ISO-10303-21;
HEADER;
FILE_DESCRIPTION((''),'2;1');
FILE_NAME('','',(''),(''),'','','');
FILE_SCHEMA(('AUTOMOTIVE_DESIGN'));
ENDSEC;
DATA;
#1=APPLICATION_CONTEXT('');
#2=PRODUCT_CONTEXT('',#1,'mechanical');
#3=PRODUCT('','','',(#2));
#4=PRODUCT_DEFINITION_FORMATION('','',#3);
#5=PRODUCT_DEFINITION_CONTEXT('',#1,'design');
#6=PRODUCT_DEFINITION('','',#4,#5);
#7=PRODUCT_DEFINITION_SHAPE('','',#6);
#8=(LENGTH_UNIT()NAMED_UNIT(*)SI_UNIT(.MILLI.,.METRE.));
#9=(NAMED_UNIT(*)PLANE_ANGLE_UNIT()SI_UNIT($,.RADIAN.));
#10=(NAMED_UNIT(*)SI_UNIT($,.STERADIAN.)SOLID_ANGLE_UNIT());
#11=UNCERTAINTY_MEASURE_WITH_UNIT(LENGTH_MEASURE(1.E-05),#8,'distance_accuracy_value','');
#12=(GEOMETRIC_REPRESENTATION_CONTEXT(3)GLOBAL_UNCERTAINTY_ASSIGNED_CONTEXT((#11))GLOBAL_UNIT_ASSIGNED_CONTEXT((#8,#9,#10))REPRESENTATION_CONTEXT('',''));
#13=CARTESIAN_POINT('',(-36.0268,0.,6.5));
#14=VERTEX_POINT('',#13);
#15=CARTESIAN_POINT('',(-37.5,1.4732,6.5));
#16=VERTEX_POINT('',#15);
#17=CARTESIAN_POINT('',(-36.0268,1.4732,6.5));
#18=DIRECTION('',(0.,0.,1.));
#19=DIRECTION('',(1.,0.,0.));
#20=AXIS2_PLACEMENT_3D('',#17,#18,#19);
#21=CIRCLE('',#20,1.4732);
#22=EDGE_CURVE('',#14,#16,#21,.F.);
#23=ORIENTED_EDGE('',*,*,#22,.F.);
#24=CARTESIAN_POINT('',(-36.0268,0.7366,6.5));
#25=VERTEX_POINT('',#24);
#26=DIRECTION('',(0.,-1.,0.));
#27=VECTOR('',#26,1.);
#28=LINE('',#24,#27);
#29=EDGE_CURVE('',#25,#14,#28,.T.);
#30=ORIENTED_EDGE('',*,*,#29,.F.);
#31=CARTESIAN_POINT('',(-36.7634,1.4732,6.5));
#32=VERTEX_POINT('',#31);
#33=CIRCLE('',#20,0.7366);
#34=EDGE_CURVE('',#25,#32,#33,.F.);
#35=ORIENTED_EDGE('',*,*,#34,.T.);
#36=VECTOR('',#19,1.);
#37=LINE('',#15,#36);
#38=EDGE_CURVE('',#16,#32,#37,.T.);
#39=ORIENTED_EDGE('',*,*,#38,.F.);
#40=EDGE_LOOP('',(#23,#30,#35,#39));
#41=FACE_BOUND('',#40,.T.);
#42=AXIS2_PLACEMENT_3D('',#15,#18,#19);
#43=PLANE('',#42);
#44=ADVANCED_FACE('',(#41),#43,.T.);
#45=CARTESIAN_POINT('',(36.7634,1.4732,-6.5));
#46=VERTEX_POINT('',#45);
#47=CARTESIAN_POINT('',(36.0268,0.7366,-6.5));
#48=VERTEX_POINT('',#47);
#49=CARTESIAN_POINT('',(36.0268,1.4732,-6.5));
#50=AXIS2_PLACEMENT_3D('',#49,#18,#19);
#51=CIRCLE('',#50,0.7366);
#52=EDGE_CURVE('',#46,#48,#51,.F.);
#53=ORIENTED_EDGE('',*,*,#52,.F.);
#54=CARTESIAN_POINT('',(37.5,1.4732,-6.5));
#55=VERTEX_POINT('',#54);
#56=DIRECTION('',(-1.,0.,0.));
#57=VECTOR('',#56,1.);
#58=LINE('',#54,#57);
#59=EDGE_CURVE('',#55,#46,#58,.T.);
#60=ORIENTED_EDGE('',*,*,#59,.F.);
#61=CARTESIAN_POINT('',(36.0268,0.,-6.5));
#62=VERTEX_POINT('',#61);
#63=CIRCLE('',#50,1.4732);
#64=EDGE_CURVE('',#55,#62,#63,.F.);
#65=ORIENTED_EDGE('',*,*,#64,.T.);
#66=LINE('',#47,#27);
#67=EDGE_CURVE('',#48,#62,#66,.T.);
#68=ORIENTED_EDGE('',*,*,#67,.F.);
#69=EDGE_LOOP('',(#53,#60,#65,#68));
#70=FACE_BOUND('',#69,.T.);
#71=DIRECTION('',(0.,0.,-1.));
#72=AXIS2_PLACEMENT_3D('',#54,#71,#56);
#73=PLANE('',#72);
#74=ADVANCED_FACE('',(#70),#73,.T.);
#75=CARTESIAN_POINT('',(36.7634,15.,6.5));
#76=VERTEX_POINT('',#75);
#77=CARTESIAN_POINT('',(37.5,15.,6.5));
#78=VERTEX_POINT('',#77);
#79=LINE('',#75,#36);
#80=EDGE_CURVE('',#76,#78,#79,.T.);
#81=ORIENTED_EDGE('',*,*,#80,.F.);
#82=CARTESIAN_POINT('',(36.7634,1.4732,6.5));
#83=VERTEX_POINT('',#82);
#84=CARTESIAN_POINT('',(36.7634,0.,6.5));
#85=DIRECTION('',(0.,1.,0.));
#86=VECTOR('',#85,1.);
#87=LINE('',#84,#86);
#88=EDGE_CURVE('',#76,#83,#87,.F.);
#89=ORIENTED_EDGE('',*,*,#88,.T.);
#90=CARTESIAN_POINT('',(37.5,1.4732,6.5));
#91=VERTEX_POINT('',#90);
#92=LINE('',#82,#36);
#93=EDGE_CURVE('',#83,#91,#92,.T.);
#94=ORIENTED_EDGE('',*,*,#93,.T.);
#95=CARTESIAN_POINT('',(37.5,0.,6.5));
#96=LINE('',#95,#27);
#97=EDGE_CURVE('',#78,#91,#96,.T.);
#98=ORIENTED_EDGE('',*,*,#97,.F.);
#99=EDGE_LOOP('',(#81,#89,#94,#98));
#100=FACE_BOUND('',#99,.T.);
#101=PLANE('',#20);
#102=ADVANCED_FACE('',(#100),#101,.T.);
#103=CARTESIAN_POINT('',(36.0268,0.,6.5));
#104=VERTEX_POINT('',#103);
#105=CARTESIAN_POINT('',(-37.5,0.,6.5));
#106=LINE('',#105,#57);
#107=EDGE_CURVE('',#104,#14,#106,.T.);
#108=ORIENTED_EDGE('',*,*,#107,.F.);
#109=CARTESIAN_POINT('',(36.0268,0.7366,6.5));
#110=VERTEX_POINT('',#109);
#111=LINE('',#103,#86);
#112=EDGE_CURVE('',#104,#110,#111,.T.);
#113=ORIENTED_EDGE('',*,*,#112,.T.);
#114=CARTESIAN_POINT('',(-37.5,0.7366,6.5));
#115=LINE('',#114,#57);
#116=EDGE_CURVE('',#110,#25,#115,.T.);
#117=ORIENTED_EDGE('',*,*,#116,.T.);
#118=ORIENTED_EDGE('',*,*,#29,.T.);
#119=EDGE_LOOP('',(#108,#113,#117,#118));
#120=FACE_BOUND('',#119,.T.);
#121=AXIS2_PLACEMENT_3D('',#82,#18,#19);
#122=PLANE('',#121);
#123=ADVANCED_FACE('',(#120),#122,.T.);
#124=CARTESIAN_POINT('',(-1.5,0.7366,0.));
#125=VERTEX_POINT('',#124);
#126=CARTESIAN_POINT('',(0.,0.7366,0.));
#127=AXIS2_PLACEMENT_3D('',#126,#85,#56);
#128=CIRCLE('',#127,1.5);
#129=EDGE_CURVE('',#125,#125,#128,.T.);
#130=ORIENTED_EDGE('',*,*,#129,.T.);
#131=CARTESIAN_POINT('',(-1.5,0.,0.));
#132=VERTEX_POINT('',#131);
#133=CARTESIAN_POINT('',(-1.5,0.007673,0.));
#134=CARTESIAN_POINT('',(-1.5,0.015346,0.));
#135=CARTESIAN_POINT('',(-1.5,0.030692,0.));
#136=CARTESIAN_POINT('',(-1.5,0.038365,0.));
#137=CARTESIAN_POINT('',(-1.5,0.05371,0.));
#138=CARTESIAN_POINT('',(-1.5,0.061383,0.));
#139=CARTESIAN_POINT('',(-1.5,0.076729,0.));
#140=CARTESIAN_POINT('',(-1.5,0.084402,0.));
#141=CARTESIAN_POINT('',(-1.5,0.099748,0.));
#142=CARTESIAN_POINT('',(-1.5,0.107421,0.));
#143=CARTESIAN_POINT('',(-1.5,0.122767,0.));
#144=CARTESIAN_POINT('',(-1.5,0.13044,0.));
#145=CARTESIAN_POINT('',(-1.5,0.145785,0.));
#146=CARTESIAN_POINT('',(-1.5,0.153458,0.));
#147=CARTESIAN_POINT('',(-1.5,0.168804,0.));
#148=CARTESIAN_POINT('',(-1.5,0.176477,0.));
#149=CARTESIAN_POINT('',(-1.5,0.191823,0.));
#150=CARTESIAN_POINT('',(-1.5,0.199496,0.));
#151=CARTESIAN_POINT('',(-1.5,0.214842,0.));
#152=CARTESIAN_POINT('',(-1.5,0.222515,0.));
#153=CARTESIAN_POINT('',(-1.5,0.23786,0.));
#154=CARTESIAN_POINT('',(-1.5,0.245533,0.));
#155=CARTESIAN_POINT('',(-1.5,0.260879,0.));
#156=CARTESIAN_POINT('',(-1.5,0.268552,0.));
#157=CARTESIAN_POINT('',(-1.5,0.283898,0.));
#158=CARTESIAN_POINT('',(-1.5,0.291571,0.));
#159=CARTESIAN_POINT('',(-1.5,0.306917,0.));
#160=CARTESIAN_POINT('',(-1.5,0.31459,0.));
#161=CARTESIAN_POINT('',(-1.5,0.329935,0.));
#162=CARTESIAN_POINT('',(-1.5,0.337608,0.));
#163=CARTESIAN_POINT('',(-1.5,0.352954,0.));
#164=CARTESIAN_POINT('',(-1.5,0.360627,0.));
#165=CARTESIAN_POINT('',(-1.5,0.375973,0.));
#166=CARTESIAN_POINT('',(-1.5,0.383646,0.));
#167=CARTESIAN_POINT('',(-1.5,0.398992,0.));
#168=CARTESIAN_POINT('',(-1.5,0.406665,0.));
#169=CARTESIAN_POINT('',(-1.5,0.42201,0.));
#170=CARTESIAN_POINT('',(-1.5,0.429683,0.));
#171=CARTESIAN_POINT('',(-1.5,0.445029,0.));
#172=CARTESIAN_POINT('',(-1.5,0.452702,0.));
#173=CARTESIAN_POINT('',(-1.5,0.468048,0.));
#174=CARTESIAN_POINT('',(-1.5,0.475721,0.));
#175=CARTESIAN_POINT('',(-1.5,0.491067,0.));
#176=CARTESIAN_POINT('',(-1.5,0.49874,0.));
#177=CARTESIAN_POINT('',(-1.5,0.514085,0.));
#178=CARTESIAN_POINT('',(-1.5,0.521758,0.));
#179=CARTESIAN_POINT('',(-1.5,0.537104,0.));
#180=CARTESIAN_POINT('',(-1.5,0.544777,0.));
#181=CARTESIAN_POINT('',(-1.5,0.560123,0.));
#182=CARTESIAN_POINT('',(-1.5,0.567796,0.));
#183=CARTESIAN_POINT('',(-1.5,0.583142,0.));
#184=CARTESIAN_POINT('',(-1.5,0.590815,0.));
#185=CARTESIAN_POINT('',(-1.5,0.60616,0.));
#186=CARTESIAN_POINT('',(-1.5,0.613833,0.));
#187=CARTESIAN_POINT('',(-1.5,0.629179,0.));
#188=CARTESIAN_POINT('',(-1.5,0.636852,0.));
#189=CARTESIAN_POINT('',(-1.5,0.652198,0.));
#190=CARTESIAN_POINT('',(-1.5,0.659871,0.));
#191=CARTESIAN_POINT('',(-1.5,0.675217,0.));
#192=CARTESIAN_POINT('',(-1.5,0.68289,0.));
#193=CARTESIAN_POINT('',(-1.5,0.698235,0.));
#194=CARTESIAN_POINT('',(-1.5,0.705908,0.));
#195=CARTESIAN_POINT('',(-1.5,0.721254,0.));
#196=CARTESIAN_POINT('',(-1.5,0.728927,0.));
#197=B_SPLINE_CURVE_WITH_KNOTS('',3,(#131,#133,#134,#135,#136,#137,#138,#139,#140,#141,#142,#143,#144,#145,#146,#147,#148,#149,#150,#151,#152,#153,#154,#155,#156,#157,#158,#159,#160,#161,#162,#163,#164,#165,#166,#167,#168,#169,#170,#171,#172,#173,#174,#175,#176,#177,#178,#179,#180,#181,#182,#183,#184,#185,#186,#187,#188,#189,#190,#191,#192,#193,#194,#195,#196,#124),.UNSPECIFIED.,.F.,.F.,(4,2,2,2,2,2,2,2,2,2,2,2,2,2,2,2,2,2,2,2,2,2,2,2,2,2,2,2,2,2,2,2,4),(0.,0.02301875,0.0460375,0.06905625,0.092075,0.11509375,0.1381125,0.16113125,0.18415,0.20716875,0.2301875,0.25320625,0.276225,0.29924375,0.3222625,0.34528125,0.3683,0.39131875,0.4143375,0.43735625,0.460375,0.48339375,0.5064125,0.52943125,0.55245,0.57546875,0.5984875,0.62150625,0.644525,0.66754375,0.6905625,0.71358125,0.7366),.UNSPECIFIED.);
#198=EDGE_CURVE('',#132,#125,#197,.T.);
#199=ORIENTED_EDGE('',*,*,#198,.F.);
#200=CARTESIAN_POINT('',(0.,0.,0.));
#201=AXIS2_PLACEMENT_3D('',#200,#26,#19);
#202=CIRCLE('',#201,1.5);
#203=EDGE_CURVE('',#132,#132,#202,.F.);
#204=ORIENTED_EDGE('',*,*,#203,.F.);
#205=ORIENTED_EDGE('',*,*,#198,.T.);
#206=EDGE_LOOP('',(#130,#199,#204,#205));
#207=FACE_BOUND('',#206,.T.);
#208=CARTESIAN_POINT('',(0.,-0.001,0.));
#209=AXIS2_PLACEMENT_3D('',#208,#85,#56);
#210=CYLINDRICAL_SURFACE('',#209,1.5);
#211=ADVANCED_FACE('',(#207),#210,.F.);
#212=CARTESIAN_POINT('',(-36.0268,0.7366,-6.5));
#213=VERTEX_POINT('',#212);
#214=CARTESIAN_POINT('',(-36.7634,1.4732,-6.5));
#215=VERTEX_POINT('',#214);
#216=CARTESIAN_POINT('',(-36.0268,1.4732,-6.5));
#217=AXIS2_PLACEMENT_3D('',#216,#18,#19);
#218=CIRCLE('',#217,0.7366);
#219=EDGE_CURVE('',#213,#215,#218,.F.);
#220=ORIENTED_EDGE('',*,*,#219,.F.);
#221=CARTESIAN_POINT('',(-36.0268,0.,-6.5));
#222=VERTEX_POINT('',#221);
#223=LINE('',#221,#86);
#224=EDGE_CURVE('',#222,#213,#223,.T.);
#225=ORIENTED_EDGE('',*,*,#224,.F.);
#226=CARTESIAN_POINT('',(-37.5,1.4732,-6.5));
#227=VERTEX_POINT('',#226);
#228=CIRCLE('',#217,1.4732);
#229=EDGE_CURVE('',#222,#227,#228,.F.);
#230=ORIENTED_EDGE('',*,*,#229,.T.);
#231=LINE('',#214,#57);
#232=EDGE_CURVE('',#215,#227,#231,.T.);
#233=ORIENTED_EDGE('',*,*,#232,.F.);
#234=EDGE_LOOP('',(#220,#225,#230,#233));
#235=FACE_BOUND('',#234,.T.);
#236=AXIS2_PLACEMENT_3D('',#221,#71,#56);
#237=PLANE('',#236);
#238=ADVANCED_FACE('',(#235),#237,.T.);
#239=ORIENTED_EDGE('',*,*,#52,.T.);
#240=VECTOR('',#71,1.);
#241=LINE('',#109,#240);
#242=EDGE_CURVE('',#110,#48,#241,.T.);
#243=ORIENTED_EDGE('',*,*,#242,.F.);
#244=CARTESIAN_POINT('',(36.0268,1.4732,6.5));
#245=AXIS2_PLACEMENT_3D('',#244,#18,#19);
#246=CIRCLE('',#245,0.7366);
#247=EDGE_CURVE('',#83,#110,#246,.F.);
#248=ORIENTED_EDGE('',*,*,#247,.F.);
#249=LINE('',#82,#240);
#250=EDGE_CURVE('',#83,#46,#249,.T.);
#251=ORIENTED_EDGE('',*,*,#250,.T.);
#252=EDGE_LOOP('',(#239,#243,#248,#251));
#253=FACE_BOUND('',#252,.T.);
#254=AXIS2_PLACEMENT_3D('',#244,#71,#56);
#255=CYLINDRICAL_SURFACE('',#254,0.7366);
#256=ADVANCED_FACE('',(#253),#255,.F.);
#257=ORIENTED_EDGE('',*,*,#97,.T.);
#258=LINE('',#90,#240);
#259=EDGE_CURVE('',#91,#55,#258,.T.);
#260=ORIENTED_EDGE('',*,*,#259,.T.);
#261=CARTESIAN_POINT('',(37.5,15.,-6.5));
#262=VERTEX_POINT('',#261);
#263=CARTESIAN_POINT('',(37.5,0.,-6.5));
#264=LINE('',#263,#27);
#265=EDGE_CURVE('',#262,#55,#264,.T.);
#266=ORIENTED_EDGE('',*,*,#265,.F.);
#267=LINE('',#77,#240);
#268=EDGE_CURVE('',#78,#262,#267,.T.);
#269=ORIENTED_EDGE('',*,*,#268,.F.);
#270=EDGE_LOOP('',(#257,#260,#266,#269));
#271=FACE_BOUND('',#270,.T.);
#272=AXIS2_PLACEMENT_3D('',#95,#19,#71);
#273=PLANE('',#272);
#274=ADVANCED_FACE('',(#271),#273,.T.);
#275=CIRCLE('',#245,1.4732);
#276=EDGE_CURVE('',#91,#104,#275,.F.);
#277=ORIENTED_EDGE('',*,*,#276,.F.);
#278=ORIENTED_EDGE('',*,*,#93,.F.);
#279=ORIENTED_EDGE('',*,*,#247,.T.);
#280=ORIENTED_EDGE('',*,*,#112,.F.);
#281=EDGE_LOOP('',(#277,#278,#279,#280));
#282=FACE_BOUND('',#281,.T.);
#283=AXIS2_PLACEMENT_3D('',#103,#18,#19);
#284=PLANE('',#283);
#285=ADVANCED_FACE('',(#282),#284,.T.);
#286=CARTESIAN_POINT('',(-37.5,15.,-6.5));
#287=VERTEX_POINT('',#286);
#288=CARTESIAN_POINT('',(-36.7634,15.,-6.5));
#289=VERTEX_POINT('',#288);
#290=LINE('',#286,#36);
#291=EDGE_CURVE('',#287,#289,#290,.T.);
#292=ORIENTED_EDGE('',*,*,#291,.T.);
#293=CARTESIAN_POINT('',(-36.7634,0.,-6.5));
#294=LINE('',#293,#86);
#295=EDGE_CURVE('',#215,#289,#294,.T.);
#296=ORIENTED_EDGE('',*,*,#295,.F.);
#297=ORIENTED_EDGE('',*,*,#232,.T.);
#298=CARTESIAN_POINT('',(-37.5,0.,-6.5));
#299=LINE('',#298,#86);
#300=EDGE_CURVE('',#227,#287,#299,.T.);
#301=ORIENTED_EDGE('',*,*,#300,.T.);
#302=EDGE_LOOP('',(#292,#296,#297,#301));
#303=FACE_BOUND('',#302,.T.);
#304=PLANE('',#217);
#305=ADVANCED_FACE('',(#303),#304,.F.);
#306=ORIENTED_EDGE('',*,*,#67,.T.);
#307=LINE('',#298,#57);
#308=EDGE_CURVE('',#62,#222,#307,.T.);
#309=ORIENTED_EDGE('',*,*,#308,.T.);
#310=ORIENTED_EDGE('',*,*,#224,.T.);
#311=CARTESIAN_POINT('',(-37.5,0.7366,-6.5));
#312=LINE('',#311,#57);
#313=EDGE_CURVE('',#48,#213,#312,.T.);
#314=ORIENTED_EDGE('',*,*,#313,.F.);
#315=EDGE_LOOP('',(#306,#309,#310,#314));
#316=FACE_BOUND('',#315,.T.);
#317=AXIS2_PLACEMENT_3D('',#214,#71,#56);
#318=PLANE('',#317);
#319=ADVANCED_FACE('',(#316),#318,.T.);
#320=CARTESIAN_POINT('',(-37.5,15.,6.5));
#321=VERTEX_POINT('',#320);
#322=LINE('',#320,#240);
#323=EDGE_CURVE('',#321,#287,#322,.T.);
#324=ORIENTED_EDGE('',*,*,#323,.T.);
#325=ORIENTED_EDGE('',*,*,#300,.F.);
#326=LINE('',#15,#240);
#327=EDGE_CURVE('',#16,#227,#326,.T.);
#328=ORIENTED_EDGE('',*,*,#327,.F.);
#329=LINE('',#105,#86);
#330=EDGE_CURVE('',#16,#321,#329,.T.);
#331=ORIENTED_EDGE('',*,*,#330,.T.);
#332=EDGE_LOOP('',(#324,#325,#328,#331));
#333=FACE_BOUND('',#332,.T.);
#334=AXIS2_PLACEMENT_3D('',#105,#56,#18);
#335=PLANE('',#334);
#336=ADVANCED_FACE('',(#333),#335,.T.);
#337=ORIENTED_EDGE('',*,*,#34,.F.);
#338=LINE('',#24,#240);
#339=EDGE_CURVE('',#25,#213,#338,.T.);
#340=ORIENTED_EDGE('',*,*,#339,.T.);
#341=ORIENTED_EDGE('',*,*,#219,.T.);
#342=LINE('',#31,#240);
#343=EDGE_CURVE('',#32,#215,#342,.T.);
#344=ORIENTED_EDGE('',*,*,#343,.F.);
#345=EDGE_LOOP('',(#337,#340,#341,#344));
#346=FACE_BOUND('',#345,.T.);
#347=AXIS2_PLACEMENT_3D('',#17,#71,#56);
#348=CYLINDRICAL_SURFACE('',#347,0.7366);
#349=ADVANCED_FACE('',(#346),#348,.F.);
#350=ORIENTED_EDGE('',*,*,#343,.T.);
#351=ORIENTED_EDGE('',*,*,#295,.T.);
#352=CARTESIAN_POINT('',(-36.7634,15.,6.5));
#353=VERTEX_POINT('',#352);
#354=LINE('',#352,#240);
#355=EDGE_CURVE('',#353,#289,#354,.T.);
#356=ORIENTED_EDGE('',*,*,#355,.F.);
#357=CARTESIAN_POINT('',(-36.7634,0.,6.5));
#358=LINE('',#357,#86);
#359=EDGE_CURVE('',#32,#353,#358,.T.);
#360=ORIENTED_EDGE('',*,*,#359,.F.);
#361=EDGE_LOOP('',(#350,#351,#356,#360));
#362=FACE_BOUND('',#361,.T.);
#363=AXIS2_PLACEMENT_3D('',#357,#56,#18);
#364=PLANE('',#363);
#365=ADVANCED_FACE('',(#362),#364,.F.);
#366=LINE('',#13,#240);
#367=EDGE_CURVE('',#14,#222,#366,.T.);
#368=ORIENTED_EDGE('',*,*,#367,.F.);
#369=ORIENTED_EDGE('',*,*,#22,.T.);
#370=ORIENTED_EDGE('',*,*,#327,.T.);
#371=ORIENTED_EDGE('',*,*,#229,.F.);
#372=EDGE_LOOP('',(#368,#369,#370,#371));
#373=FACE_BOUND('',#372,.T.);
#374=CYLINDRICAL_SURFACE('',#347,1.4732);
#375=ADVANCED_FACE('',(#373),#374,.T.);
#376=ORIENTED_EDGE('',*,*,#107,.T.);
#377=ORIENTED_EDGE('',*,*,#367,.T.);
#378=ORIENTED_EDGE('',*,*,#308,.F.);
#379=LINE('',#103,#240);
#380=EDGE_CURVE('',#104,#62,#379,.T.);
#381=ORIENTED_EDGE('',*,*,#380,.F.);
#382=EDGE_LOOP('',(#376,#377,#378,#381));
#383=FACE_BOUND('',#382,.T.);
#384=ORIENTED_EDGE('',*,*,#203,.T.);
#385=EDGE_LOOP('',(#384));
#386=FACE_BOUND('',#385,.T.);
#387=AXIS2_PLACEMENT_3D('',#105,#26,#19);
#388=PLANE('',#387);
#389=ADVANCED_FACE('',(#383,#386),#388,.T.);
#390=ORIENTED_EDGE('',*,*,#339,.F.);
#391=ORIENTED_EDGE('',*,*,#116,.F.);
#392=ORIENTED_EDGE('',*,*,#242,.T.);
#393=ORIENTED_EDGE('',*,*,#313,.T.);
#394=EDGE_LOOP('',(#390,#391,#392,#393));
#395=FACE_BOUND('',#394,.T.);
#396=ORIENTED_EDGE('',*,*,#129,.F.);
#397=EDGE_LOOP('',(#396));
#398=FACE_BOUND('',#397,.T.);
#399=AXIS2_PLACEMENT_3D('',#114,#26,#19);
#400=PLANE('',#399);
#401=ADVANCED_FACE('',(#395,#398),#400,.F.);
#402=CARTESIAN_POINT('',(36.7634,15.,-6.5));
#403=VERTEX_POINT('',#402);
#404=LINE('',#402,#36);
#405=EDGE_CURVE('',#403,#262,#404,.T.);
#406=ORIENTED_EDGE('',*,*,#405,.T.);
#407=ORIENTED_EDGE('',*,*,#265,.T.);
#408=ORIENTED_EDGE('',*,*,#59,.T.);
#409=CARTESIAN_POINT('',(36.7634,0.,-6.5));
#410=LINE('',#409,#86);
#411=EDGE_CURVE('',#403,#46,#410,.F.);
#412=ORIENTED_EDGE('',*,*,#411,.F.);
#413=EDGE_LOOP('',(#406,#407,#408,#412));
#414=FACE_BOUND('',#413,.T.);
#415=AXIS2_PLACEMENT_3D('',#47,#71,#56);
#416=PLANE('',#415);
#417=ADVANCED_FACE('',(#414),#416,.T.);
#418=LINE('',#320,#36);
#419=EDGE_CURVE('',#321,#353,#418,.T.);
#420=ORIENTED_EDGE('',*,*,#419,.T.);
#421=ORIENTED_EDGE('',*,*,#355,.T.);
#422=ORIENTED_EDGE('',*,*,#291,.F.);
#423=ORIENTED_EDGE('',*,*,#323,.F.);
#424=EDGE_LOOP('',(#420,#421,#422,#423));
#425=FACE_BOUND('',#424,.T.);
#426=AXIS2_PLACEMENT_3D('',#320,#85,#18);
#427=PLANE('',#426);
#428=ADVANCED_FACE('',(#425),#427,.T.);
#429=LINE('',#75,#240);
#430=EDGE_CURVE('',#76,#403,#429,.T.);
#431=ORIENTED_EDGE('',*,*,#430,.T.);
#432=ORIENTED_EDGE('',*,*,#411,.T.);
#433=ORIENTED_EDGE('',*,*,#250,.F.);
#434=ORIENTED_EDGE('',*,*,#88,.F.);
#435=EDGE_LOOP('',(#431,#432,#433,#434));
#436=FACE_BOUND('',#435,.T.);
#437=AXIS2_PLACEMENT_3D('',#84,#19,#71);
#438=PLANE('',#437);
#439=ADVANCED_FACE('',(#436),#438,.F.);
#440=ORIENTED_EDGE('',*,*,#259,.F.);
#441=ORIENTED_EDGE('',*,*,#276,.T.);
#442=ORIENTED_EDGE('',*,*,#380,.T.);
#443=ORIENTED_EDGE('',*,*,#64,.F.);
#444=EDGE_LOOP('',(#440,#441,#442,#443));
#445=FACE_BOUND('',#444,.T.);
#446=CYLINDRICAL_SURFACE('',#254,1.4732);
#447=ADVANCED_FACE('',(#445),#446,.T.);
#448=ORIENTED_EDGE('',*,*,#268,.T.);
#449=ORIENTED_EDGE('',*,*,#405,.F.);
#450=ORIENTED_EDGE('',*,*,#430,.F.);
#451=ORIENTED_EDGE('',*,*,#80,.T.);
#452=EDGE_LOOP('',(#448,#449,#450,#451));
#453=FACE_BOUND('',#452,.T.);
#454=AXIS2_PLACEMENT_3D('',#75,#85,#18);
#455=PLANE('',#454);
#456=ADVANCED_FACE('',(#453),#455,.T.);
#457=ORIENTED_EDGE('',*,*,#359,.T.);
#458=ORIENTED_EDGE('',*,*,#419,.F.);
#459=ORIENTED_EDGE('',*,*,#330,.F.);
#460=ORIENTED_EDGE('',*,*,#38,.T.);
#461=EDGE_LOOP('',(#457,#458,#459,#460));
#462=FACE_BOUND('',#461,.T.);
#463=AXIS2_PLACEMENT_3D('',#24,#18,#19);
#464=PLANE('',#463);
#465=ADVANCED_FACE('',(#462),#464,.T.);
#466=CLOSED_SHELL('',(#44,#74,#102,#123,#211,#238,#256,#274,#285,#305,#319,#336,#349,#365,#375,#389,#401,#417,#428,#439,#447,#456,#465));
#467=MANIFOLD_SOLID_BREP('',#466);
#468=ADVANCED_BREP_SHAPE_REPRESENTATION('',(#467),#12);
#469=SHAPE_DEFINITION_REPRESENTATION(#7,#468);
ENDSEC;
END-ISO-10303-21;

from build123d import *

# Parameters (mm, degrees)
SM_BASE_FLANGE_1_DEPTH = 6.5
OTHER_1_OUTLINE_R      = 1.5
OTHER_1_DEPTH          = 0.7366


# Read off the part's stored shape, not the designer's step: Отверстие1
# Sheet-metal steps are written as plain solids
with BuildPart() as part:
    # Sketch 1 → Базовая кромка1 (new, symmetric)
    with BuildSketch(Plane.XY):
        with BuildLine():
            Line((-37.5, 15), (-37.5, 1.4732))
            ThreePointArc((-37.5, 1.4732), (-37.06850971, 0.43149029), (-36.0268, 0))
            Line((-36.0268, 0), (36.0268, 0))
            ThreePointArc((36.0268, 0), (37.06850971, 0.43149029), (37.5, 1.4732))
            Line((37.5, 1.4732), (37.5, 15))
            Line((37.5, 15), (36.7634, 15))
            Line((36.7634, 15), (36.7634, 1.4732))
            ThreePointArc((36.7634, 1.4732), (36.547654855, 0.952345145), (36.0268, 0.7366))
            Line((36.0268, 0.7366), (-36.0268, 0.7366))
            ThreePointArc((-36.0268, 0.7366), (-36.547654855, 0.952345145), (-36.7634, 1.4732))
            Line((-36.7634, 1.4732), (-36.7634, 15))
            Line((-36.7634, 15), (-37.5, 15))
        make_face()
    extrude(amount=SM_BASE_FLANGE_1_DEPTH, both=True)

    # Отверстие1 outline → Отверстие1 (cut)
    with BuildSketch(Plane(origin=(0, 0, 0), x_dir=(1, 0, 0), z_dir=(0, 1, 0))):
        Circle(OTHER_1_OUTLINE_R)
    extrude(amount=OTHER_1_DEPTH, mode=Mode.SUBTRACT)


solid = part.part
